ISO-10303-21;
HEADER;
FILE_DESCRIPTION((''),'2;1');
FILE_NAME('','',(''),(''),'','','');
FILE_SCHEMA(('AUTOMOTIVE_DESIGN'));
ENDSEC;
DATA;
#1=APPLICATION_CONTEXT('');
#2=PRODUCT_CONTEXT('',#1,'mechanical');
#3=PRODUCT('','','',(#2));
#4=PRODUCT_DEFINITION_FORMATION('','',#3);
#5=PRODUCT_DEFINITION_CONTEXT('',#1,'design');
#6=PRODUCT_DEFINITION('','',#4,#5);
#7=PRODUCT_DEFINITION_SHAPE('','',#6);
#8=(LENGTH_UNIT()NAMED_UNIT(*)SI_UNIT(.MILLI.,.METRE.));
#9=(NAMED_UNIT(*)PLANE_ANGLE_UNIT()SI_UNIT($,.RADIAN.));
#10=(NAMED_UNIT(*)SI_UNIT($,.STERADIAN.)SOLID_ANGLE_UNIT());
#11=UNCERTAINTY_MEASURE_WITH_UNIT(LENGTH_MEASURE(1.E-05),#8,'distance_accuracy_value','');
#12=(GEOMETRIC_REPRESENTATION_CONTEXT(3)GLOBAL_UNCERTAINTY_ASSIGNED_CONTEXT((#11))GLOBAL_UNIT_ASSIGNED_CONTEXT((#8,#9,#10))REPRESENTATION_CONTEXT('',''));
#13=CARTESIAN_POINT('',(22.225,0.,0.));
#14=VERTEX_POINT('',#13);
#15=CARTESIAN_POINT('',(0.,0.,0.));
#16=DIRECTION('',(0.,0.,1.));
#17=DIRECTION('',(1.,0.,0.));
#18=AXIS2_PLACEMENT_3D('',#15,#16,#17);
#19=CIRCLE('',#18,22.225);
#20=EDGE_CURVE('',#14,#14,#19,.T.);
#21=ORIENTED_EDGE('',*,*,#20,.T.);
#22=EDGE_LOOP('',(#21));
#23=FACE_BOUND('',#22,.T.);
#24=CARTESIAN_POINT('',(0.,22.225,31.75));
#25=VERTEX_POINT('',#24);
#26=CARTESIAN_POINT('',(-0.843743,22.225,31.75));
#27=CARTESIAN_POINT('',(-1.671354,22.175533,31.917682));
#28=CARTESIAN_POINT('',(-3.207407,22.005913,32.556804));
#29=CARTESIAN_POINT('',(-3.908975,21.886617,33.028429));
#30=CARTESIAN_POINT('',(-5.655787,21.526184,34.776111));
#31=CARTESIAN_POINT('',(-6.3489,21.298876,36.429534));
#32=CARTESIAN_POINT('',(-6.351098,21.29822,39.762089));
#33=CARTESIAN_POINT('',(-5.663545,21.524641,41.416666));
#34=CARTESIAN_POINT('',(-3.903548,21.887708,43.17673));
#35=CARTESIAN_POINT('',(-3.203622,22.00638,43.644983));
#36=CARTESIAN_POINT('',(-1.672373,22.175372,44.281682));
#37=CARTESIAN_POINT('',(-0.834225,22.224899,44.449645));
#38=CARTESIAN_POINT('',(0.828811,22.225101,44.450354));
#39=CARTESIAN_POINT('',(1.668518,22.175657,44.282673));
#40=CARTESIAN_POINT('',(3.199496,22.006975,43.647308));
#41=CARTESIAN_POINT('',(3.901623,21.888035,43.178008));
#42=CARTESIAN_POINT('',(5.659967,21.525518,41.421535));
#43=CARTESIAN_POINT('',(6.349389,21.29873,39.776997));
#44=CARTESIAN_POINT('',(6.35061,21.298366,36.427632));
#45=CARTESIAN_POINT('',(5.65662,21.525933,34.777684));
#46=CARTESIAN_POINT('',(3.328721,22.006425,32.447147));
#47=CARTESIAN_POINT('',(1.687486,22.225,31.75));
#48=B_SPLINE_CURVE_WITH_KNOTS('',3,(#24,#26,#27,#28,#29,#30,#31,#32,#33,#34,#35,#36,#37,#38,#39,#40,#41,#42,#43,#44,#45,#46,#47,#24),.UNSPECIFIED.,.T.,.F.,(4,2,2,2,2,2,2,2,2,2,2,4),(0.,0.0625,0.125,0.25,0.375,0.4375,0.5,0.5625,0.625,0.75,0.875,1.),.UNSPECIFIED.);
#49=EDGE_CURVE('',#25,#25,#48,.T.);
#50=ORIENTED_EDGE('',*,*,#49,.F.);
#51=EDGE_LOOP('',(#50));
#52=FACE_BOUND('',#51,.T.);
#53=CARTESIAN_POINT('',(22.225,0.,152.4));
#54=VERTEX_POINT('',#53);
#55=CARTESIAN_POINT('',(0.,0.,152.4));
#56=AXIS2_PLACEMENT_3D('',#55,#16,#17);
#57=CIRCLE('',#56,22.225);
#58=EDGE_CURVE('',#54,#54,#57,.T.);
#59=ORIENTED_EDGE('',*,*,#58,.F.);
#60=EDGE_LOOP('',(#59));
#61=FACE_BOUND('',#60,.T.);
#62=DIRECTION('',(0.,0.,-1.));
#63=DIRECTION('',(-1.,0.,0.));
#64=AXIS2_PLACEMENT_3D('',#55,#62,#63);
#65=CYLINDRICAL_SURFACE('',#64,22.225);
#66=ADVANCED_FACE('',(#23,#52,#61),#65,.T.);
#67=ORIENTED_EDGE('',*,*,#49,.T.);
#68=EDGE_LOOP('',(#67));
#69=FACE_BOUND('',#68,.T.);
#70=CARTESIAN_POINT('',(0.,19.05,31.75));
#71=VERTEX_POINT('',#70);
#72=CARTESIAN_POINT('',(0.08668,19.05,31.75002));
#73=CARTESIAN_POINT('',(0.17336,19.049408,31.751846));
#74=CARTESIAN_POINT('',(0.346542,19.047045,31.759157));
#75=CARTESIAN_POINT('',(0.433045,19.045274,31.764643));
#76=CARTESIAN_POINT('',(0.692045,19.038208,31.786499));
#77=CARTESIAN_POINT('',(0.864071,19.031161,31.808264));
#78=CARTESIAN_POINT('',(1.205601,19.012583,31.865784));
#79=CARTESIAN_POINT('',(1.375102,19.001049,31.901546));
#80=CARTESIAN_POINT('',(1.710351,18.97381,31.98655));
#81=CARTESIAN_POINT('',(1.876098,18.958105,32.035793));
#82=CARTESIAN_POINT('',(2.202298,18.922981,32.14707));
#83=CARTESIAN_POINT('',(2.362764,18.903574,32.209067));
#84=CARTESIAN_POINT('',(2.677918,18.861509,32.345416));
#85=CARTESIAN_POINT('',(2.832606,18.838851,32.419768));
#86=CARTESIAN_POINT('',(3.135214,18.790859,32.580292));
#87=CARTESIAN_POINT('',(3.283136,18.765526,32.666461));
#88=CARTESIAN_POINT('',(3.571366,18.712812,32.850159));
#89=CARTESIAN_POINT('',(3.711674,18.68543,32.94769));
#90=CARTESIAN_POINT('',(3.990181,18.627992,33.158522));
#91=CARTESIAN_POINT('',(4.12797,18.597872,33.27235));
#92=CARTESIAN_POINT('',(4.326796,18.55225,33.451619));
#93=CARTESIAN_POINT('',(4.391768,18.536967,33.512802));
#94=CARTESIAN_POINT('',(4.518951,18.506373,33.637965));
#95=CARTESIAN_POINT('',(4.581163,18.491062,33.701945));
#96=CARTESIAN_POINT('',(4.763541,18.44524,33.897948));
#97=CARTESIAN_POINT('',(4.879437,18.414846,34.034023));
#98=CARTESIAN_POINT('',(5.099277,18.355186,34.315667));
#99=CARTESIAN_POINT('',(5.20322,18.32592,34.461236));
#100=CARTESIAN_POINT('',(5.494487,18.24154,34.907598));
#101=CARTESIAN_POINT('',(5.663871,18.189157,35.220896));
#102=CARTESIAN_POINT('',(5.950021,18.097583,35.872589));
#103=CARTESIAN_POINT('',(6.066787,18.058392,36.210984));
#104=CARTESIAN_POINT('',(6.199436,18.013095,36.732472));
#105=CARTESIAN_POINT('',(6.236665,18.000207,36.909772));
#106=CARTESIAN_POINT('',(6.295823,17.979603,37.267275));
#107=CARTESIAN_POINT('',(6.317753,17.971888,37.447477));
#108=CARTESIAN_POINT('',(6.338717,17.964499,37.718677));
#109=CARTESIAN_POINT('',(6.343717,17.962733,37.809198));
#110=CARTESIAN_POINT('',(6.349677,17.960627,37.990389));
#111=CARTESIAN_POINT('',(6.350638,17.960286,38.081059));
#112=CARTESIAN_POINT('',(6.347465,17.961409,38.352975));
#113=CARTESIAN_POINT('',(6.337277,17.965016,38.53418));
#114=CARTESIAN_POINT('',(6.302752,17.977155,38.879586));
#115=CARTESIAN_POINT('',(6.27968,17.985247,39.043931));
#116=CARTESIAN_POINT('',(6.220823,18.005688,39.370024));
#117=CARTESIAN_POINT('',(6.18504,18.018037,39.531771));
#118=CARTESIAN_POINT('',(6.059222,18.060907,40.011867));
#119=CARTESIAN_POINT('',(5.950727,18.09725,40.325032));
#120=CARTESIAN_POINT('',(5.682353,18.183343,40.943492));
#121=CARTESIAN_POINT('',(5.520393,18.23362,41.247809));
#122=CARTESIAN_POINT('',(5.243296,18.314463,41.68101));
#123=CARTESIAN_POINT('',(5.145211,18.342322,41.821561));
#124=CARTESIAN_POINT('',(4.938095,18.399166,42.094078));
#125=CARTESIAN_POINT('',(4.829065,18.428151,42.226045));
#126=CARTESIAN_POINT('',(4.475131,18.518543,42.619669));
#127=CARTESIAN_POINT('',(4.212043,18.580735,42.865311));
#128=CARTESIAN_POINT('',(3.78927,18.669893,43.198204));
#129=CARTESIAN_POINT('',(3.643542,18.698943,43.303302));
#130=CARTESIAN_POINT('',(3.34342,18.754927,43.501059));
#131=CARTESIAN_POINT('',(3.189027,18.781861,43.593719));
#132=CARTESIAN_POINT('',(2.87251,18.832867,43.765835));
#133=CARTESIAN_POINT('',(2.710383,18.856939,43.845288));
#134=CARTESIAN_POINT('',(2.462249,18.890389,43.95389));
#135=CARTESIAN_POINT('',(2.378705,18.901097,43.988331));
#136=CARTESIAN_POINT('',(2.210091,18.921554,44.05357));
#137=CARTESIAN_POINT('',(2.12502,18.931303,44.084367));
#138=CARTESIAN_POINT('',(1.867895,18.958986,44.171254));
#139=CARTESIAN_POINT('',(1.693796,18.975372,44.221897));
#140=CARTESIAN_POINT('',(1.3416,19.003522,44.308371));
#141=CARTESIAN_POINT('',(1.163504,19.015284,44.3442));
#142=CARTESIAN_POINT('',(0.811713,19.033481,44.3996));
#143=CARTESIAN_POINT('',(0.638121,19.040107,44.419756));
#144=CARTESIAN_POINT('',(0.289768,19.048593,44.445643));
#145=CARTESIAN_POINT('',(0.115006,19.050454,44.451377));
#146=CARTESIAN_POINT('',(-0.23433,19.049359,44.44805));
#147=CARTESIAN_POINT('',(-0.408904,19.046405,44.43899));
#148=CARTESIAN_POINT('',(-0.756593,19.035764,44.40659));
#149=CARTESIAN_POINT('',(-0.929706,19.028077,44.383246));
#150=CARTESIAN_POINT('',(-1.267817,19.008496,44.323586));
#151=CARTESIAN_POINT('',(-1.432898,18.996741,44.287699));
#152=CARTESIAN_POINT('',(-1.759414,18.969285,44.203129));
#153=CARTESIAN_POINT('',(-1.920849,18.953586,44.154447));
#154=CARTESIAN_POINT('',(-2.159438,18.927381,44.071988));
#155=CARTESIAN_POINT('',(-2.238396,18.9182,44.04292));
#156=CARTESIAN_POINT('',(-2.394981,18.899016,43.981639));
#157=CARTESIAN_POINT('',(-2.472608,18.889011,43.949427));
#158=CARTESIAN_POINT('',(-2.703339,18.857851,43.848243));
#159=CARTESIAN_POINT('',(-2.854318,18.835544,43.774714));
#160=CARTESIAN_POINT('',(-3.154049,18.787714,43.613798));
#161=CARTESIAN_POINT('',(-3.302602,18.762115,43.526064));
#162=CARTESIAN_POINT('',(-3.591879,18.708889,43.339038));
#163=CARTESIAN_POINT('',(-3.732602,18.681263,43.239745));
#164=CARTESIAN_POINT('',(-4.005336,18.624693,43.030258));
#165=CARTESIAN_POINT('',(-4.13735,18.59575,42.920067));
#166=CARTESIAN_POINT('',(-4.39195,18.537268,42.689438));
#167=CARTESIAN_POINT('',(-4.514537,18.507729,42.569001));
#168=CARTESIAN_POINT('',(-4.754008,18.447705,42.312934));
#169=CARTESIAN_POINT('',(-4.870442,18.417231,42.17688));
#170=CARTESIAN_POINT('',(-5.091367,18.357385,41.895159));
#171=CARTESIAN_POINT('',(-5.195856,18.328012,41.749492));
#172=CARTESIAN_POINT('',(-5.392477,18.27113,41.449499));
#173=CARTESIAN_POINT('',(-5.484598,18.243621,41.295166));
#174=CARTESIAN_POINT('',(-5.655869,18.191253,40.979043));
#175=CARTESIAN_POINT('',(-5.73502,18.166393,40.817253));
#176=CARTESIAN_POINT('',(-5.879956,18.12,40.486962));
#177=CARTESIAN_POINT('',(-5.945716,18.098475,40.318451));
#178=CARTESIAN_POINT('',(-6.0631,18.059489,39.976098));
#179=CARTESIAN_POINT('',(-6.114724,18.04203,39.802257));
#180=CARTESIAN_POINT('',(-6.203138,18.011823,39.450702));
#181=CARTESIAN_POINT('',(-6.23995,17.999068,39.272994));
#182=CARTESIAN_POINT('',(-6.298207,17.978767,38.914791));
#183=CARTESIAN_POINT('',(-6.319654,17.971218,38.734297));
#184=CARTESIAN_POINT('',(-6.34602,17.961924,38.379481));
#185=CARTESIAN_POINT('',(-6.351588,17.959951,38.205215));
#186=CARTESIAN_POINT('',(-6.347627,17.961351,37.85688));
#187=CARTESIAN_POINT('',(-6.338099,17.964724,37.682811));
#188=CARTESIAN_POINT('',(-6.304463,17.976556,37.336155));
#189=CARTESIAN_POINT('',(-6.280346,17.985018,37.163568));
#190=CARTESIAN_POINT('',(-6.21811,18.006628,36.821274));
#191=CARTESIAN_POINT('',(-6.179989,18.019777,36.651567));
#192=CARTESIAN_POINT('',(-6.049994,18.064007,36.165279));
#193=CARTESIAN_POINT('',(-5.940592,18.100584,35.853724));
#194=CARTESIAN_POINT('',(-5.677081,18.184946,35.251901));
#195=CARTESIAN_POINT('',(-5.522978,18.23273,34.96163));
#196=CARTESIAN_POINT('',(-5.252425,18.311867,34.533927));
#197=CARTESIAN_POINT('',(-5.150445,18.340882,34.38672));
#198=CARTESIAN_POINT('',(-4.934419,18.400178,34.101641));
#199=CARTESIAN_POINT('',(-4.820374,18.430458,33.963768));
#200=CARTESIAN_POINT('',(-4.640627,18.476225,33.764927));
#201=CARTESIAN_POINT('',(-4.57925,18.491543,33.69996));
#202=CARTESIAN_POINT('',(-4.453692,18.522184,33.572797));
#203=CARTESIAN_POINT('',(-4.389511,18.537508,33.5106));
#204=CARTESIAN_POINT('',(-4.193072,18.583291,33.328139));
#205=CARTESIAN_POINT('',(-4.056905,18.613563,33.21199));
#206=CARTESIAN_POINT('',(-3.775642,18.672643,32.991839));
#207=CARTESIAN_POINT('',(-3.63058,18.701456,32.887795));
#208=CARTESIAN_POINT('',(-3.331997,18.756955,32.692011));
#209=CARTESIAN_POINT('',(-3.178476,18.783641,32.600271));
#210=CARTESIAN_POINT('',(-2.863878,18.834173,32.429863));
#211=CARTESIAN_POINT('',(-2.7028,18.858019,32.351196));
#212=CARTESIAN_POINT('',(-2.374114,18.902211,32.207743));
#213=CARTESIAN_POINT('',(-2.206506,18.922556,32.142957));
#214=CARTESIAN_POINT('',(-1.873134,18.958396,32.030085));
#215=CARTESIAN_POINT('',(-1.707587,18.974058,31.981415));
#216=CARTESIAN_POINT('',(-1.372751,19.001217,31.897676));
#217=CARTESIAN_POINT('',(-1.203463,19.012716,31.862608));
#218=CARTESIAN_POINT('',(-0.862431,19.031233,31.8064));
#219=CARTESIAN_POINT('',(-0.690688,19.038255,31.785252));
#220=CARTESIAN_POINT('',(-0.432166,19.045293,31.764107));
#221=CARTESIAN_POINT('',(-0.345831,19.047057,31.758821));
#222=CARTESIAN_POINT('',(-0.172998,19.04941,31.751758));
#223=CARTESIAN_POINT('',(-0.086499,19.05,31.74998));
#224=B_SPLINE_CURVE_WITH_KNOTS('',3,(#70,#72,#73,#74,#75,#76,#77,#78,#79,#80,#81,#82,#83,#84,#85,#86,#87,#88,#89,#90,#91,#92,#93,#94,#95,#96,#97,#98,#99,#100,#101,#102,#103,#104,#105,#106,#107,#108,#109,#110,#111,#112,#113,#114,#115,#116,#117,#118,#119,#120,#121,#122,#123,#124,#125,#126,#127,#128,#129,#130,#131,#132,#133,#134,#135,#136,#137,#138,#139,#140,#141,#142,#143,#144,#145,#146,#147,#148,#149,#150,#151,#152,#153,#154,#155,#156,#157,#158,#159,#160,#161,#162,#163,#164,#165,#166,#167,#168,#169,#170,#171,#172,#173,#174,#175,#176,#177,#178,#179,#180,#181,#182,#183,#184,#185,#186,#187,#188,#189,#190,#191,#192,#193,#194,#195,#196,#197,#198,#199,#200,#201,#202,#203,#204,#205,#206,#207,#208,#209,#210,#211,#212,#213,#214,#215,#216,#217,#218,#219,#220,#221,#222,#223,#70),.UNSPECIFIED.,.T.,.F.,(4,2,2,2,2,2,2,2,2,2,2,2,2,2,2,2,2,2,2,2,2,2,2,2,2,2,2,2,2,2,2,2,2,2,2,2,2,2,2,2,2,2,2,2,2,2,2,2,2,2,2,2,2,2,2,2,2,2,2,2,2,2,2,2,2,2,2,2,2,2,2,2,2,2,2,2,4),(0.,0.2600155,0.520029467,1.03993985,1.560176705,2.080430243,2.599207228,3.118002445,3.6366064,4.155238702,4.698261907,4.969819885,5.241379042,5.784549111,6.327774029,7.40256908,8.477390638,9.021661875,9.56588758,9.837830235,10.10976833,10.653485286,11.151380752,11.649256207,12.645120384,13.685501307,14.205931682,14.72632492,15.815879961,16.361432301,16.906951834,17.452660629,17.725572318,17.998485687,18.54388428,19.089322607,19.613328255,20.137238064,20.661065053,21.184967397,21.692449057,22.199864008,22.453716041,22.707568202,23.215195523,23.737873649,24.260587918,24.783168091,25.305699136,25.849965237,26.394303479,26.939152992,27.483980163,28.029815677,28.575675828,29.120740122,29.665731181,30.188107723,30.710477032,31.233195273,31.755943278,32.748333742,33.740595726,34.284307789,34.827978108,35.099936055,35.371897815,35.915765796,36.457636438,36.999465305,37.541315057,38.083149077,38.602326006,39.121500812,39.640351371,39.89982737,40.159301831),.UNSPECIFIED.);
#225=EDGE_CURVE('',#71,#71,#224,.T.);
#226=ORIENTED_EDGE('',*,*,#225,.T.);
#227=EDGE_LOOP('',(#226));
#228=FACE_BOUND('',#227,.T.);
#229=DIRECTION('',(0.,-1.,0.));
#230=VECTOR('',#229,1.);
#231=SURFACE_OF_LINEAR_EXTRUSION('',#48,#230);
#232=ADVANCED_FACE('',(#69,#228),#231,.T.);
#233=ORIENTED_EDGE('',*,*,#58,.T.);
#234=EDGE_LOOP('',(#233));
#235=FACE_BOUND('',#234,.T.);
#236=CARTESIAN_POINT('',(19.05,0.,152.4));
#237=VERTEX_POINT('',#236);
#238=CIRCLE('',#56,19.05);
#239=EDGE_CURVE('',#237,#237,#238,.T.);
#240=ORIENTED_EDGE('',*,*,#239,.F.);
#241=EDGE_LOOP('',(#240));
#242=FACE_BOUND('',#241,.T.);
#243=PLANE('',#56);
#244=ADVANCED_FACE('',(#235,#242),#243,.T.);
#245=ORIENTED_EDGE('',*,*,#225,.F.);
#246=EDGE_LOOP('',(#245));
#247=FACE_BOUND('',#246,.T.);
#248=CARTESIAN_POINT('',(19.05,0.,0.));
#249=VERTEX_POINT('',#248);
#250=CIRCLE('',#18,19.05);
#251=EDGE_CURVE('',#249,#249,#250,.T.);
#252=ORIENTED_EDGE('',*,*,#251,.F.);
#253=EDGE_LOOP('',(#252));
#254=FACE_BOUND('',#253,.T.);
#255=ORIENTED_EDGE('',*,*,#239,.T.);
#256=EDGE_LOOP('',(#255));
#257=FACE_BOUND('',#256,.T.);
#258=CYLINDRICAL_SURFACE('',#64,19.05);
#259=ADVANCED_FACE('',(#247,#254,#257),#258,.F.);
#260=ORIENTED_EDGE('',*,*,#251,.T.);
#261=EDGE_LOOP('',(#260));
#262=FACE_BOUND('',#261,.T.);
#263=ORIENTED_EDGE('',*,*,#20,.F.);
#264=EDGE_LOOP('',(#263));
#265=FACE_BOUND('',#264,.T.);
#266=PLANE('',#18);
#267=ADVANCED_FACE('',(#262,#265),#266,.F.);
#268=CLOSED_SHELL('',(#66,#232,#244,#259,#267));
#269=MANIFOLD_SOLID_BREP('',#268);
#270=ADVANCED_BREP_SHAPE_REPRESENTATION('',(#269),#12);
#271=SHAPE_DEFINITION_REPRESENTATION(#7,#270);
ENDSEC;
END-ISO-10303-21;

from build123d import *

# Parameters (mm, degrees)
SKETCH1_R           = 22.225
SKETCH1_R_2         = 19.05
BOSS_EXTRUDE1_DEPTH = 152.4
CUT_EXTRUDE2_START  = 17
CUT_EXTRUDE2_DEPTH  = 6


with BuildPart() as part:
    # Sketch1 → Boss-Extrude1 (new body)
    with BuildSketch(Plane.XY):
        with Locations(Location((0, 0, 0), (0, 0, 180))):
            Circle(SKETCH1_R)
        with Locations(Location((0, 0, 0), (0, 0, 180))):
            Circle(SKETCH1_R_2, mode=Mode.SUBTRACT)
    extrude(amount=BOSS_EXTRUDE1_DEPTH)

    # Cut-Extrude2: read off the stored shape, not the designer's step
    # Cut-Extrude2 outline → Cut-Extrude2 (cut)
    with BuildSketch(Plane(origin=(0, 0, 0), x_dir=(1, 0, 0), z_dir=(0, 1, 0)).offset(CUT_EXTRUDE2_START)):
        with BuildLine():
            add(Edge.make_bspline(
                [(0, -31.75), (-0.843742977, -31.75), (-1.67135416, -31.917681707), (-3.207407391, -32.556803988), (-3.908974771, -33.028428985), (-5.655787185, -34.776111227), (-6.348899568, -36.429534298), (-6.35109767, -39.76208898), (-5.663545224, -41.416666002), (-3.903548324, -43.176730242), (-3.20362184, -43.644982836), (-1.672372727, -44.281682376), (-0.83422503, -44.449644915), (0.828810532, -44.450353931), (1.668517725, -44.282672927), (3.199496011, -43.647307562), (3.901623248, -43.178008083), (5.659966961, -41.421534924), (6.34938922, -39.776997076), (6.350609937, -36.427631593), (5.656619925, -34.777684483), (3.328721052, -32.447147133), (1.687485953, -31.75), (0, -31.75)],
                knots=[0, 0, 0, 0, 0.0625, 0.0625, 0.125, 0.125, 0.25, 0.25, 0.375, 0.375, 0.4375, 0.4375, 0.5, 0.5, 0.5625, 0.5625, 0.625, 0.625, 0.75, 0.75, 0.875, 0.875, 1, 1, 1, 1], degree=3))
        make_face()
    extrude(amount=CUT_EXTRUDE2_DEPTH, mode=Mode.SUBTRACT)


solid = part.part
